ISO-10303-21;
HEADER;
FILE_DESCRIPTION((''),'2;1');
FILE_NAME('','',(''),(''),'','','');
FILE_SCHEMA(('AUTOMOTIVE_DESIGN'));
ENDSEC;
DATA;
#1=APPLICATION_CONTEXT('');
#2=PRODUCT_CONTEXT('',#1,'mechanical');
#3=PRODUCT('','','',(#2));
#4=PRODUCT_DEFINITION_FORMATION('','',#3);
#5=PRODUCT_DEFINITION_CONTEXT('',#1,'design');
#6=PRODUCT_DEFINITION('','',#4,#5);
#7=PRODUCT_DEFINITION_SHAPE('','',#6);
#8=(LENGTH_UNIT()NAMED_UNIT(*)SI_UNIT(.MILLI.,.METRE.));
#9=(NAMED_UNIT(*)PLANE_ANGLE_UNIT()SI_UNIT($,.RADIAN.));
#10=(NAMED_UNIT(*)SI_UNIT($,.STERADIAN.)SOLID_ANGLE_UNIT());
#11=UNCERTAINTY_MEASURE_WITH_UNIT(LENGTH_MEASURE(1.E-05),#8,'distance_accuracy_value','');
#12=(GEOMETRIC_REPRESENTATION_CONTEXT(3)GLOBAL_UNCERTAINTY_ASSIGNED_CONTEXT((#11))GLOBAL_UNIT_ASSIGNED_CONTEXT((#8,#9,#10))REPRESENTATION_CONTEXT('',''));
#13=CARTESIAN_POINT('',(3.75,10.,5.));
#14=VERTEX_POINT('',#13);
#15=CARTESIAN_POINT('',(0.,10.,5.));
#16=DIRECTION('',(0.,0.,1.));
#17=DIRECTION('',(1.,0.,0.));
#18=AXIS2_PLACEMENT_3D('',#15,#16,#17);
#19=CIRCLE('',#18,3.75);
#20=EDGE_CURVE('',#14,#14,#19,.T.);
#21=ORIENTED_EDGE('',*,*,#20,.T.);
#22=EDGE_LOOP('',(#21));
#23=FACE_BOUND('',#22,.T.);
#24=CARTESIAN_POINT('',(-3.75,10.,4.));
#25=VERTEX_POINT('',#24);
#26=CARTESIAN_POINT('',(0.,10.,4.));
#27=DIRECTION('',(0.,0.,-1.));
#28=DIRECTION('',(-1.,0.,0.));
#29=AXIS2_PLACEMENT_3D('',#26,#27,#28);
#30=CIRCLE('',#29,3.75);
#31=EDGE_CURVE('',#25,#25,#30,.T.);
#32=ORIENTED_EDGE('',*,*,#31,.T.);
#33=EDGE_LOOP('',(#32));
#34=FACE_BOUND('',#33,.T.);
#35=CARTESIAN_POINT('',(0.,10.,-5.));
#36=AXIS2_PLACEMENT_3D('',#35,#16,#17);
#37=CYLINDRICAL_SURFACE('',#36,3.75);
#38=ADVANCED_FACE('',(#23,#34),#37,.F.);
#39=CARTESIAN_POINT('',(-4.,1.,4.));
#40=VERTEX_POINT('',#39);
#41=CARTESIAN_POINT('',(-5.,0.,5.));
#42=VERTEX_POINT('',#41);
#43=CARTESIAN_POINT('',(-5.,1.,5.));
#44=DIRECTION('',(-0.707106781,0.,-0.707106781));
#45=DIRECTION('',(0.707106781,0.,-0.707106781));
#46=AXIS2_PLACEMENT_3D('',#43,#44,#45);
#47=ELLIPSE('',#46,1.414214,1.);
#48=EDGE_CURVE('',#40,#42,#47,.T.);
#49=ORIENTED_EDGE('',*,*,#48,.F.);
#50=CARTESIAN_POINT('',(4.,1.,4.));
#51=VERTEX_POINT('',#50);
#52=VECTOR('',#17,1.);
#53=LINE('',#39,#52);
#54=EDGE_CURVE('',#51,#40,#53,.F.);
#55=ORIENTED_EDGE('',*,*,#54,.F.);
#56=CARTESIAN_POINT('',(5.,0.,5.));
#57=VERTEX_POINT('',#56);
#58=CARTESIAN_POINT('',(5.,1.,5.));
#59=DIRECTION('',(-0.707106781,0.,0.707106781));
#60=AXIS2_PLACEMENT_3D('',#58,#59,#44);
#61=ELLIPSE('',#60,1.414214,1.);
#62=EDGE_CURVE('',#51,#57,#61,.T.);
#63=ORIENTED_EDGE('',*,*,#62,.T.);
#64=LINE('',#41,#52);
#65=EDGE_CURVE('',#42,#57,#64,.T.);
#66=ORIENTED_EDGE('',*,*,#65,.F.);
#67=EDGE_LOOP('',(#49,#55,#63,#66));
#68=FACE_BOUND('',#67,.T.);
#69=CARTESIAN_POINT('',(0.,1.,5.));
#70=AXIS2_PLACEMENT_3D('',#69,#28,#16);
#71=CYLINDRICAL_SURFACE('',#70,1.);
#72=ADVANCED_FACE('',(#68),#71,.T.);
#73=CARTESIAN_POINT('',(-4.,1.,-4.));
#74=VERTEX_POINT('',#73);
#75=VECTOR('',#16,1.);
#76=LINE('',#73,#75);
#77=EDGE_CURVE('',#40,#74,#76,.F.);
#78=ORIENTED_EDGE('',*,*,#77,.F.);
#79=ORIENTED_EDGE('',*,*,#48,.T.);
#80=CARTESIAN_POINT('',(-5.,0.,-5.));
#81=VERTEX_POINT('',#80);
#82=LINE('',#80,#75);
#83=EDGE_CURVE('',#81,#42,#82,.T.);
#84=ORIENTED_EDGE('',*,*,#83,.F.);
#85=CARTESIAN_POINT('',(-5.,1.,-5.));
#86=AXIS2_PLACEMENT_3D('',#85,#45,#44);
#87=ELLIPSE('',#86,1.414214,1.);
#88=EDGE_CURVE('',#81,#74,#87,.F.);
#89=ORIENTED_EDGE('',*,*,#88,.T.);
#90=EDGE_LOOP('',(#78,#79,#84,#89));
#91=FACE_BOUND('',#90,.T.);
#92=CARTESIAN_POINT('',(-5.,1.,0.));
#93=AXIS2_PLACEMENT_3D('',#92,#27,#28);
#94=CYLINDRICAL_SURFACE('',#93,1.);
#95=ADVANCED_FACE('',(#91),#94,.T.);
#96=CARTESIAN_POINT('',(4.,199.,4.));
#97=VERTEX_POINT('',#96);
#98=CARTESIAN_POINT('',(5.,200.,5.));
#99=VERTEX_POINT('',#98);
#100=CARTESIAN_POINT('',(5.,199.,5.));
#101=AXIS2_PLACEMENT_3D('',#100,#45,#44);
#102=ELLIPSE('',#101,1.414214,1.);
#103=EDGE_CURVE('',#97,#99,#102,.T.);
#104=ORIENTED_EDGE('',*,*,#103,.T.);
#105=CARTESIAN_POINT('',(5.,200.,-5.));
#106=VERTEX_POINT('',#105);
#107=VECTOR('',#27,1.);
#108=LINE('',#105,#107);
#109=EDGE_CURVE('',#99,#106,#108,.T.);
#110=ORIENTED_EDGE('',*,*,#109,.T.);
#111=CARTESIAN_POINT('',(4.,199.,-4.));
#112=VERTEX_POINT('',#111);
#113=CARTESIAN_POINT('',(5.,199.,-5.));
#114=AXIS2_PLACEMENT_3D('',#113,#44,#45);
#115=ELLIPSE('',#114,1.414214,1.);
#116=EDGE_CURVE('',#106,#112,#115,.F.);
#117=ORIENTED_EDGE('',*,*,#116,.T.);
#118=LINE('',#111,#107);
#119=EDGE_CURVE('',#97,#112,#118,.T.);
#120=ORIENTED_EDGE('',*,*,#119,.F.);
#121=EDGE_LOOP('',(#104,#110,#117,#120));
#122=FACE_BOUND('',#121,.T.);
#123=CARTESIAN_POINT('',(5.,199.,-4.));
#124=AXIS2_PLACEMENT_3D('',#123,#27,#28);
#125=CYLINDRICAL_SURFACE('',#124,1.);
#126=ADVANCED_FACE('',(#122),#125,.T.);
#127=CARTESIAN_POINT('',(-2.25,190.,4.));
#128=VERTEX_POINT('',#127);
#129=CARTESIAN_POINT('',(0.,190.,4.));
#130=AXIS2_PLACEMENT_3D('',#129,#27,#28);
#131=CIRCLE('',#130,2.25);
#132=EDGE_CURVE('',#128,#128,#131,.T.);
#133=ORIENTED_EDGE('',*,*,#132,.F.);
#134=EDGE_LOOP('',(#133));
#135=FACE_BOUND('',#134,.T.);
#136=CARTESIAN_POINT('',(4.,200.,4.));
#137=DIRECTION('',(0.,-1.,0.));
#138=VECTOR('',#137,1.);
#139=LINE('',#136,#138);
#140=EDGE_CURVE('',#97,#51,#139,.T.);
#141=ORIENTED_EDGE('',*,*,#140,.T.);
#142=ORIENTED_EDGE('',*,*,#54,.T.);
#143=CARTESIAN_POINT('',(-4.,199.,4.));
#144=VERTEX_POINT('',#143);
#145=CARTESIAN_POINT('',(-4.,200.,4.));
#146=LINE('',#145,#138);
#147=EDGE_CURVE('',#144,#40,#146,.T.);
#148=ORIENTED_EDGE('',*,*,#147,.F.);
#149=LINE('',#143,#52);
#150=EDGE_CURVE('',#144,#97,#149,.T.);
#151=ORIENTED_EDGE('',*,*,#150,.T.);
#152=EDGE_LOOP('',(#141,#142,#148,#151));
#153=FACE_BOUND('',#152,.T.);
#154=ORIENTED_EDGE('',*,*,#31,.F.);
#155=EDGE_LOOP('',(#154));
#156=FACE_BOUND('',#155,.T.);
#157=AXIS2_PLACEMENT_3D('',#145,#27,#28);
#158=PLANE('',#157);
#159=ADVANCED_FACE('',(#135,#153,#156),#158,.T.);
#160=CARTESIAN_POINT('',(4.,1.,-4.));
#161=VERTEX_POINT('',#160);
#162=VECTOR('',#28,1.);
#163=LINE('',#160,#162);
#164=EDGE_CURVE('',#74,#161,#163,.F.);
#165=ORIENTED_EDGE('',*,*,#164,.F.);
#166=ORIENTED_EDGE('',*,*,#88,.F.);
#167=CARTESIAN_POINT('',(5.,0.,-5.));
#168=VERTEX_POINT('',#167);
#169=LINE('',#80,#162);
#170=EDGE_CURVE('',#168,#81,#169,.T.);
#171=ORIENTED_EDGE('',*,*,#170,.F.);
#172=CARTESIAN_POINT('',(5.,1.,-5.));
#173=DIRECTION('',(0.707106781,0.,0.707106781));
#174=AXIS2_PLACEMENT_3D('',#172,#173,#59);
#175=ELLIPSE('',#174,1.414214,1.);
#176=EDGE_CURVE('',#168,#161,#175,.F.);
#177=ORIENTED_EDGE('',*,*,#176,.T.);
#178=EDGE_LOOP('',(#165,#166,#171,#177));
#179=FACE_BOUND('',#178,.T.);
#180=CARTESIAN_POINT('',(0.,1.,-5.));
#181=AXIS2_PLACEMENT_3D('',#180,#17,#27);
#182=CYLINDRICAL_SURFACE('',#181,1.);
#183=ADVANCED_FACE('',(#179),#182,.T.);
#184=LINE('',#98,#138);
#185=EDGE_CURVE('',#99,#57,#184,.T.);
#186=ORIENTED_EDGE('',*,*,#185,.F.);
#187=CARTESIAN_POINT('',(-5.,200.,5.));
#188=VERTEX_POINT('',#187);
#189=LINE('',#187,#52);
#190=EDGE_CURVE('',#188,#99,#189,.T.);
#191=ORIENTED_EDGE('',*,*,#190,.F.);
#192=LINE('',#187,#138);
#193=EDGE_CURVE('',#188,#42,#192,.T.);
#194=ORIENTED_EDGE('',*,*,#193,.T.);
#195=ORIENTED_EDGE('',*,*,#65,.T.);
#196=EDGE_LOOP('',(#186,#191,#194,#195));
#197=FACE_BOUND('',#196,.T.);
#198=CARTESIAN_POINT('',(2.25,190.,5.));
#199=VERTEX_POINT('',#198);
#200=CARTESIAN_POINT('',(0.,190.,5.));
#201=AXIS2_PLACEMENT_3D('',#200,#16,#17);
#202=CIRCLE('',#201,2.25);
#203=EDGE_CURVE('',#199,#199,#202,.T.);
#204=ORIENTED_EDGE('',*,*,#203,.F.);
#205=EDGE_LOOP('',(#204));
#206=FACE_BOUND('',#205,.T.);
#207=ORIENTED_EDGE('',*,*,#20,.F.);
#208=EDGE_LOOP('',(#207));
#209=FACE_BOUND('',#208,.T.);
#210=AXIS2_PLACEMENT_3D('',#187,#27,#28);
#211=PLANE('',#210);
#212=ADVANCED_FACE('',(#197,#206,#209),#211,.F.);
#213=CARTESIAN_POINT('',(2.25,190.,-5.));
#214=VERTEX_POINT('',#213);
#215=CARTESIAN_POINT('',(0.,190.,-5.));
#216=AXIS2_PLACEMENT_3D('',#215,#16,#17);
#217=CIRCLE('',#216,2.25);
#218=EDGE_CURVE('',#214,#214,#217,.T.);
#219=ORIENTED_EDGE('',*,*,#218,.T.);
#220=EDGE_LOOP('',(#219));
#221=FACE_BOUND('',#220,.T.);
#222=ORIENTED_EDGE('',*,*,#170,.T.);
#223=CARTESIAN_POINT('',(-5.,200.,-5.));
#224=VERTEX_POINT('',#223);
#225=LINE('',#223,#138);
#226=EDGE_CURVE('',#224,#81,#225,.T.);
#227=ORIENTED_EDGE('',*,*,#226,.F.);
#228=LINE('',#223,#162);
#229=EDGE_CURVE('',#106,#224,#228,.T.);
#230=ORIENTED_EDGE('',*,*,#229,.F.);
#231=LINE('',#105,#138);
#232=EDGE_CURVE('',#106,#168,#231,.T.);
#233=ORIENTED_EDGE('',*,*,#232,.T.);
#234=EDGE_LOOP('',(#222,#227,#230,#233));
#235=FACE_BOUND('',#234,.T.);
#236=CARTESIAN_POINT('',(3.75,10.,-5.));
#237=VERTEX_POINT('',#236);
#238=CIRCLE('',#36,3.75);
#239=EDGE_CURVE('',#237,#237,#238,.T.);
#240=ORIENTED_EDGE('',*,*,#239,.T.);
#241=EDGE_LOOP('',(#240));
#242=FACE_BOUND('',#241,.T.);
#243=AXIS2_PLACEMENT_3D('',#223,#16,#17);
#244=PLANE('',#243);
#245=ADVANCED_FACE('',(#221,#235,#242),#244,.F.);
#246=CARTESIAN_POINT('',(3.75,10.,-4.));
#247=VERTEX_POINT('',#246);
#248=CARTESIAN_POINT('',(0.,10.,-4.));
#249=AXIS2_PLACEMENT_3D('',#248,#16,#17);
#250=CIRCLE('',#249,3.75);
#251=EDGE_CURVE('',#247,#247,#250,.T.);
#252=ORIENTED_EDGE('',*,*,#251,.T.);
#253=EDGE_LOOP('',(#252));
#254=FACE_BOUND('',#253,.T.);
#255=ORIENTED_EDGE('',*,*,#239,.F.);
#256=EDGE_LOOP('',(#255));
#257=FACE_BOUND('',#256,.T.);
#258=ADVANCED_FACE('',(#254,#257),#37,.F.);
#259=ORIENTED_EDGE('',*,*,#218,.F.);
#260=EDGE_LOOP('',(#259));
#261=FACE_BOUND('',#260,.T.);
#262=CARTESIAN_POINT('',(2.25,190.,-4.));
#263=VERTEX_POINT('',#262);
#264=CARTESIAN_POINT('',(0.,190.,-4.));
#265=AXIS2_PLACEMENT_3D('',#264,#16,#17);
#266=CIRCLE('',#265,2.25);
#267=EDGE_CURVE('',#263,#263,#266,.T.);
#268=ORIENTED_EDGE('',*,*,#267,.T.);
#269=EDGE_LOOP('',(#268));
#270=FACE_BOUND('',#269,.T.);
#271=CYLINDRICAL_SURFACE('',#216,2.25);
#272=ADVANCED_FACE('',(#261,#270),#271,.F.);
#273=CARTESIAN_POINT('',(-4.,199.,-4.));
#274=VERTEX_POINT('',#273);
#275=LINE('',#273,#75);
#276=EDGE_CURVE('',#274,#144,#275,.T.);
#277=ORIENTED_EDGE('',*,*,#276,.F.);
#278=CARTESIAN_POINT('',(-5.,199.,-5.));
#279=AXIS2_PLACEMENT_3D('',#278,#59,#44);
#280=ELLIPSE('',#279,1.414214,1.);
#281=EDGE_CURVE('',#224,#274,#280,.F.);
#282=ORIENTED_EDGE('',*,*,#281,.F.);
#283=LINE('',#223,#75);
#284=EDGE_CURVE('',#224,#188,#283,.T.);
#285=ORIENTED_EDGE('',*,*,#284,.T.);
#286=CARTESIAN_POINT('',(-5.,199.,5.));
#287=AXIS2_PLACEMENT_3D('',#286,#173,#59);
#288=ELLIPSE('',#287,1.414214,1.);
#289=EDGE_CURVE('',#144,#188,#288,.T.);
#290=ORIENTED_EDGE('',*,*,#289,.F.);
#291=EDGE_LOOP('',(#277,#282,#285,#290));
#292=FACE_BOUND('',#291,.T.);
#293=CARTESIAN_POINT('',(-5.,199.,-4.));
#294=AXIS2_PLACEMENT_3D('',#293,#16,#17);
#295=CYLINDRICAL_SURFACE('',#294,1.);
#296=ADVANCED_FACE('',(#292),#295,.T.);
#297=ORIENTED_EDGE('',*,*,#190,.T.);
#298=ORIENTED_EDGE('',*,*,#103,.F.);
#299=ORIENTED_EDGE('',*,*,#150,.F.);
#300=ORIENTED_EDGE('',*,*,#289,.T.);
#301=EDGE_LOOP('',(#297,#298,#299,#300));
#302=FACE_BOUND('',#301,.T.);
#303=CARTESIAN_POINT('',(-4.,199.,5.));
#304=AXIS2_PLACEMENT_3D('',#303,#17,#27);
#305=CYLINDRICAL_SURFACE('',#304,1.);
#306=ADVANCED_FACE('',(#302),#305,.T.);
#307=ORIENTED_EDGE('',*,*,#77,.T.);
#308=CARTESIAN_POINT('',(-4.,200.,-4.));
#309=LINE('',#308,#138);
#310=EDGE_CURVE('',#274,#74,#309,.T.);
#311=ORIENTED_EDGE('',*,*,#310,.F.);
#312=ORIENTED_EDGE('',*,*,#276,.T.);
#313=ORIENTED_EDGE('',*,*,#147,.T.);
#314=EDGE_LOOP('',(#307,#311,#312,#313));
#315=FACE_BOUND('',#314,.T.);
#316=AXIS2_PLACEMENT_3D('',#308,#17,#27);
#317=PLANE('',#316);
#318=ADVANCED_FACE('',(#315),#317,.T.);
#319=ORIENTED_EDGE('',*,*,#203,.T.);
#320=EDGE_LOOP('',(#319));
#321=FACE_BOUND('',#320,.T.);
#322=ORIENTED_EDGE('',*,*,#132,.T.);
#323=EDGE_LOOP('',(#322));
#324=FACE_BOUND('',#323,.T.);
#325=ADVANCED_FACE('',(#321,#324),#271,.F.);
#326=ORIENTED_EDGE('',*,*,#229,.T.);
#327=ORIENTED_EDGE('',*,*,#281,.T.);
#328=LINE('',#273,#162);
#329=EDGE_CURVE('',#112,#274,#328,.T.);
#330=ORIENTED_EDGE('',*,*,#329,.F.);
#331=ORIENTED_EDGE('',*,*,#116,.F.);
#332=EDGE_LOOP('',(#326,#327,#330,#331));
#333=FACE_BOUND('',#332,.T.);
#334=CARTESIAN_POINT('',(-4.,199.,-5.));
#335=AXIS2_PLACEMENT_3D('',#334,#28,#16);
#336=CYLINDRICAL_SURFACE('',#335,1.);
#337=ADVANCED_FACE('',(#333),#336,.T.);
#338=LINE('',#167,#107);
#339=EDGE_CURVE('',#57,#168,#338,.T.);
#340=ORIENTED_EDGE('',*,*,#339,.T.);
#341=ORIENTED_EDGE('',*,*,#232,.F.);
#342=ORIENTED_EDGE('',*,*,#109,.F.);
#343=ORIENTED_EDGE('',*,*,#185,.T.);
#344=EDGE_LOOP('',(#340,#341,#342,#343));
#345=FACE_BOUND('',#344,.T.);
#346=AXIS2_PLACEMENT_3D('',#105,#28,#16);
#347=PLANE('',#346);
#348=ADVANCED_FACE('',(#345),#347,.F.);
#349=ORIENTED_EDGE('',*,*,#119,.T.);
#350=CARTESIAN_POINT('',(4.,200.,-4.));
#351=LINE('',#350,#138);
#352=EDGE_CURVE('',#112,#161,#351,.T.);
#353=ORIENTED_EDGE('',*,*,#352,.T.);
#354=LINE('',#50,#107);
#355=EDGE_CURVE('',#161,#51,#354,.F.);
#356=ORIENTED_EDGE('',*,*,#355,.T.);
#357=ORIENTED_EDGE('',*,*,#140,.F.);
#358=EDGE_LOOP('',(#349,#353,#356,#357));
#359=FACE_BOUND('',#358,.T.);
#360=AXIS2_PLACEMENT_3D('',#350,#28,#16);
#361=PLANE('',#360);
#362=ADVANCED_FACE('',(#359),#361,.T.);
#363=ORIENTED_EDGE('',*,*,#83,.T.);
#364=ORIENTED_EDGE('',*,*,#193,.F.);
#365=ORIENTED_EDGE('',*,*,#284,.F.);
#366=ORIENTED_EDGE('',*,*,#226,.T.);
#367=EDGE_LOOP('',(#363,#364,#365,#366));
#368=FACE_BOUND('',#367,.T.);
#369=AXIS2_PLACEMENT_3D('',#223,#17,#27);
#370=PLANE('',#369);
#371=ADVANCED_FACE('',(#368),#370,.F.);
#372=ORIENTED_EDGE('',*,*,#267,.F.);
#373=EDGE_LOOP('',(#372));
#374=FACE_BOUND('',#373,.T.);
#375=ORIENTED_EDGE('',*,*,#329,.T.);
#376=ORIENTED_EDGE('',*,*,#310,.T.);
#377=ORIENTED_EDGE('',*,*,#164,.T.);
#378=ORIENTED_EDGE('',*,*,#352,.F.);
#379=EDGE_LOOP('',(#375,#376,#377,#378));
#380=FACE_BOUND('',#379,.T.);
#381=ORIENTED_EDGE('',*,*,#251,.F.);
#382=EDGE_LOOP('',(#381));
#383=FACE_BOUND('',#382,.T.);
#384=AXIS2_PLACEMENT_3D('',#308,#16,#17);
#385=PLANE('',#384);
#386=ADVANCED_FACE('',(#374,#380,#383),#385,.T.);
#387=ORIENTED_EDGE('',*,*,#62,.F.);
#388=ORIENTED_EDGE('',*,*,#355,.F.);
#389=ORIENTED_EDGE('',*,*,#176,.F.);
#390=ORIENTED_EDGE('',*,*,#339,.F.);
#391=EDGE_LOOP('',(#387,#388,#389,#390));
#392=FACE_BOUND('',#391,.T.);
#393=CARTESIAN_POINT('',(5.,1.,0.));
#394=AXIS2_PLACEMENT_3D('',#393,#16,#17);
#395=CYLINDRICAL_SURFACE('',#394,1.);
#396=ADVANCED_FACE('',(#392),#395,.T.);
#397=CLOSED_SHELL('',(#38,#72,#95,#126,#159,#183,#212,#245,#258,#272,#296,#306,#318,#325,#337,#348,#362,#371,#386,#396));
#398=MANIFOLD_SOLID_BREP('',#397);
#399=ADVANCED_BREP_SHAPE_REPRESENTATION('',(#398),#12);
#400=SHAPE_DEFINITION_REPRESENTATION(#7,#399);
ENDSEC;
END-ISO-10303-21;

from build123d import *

# Parameters (mm, degrees)
SKETCH1_W           = 10
SKETCH1_H           = 10
SKETCH1_W_2         = 8
SKETCH1_H_2         = 8
BOSS_EXTRUDE1_DEPTH = 200
FILLET2_R           = 1
SKETCH2_R           = 3.75
SKETCH2_R_2         = 2.25
CUT_EXTRUDE1_DEPTH  = 201.31225624


with BuildPart() as part:
    # Sketch1 → Boss-Extrude1 (new body)
    with BuildSketch(Plane(origin=(0, 0, 0), x_dir=(1, 0, 0), z_dir=(0, 1, 0))):
        Rectangle(SKETCH1_W, SKETCH1_H)
        Rectangle(SKETCH1_W_2, SKETCH1_H_2, mode=Mode.SUBTRACT)
    extrude(amount=BOSS_EXTRUDE1_DEPTH)

    # Fillet2
    fillet2_edges = [part.edges().sort_by_distance(p)[0] for p in [
        (4, 0, 0),
        (0, 0, -4),
        (-4, 0, 0),
        (0, 0, 4),
        (4, 200, 0),
        (0, 200, -4),
        (-4, 200, 0),
        (0, 200, 4),
    ]]
    fillet(fillet2_edges, radius=FILLET2_R - 0.0001)  # a hair under: the kernel refuses the full size

    # Sketch2 → Cut-Extrude1 (cut, through all)
    with BuildSketch(Plane.XY.offset(5)):
        with Locations((0, 10)):
            Circle(SKETCH2_R)
        with Locations((0, 190)):
            Circle(SKETCH2_R_2)
    extrude(amount=-CUT_EXTRUDE1_DEPTH, mode=Mode.SUBTRACT)


solid = part.part
